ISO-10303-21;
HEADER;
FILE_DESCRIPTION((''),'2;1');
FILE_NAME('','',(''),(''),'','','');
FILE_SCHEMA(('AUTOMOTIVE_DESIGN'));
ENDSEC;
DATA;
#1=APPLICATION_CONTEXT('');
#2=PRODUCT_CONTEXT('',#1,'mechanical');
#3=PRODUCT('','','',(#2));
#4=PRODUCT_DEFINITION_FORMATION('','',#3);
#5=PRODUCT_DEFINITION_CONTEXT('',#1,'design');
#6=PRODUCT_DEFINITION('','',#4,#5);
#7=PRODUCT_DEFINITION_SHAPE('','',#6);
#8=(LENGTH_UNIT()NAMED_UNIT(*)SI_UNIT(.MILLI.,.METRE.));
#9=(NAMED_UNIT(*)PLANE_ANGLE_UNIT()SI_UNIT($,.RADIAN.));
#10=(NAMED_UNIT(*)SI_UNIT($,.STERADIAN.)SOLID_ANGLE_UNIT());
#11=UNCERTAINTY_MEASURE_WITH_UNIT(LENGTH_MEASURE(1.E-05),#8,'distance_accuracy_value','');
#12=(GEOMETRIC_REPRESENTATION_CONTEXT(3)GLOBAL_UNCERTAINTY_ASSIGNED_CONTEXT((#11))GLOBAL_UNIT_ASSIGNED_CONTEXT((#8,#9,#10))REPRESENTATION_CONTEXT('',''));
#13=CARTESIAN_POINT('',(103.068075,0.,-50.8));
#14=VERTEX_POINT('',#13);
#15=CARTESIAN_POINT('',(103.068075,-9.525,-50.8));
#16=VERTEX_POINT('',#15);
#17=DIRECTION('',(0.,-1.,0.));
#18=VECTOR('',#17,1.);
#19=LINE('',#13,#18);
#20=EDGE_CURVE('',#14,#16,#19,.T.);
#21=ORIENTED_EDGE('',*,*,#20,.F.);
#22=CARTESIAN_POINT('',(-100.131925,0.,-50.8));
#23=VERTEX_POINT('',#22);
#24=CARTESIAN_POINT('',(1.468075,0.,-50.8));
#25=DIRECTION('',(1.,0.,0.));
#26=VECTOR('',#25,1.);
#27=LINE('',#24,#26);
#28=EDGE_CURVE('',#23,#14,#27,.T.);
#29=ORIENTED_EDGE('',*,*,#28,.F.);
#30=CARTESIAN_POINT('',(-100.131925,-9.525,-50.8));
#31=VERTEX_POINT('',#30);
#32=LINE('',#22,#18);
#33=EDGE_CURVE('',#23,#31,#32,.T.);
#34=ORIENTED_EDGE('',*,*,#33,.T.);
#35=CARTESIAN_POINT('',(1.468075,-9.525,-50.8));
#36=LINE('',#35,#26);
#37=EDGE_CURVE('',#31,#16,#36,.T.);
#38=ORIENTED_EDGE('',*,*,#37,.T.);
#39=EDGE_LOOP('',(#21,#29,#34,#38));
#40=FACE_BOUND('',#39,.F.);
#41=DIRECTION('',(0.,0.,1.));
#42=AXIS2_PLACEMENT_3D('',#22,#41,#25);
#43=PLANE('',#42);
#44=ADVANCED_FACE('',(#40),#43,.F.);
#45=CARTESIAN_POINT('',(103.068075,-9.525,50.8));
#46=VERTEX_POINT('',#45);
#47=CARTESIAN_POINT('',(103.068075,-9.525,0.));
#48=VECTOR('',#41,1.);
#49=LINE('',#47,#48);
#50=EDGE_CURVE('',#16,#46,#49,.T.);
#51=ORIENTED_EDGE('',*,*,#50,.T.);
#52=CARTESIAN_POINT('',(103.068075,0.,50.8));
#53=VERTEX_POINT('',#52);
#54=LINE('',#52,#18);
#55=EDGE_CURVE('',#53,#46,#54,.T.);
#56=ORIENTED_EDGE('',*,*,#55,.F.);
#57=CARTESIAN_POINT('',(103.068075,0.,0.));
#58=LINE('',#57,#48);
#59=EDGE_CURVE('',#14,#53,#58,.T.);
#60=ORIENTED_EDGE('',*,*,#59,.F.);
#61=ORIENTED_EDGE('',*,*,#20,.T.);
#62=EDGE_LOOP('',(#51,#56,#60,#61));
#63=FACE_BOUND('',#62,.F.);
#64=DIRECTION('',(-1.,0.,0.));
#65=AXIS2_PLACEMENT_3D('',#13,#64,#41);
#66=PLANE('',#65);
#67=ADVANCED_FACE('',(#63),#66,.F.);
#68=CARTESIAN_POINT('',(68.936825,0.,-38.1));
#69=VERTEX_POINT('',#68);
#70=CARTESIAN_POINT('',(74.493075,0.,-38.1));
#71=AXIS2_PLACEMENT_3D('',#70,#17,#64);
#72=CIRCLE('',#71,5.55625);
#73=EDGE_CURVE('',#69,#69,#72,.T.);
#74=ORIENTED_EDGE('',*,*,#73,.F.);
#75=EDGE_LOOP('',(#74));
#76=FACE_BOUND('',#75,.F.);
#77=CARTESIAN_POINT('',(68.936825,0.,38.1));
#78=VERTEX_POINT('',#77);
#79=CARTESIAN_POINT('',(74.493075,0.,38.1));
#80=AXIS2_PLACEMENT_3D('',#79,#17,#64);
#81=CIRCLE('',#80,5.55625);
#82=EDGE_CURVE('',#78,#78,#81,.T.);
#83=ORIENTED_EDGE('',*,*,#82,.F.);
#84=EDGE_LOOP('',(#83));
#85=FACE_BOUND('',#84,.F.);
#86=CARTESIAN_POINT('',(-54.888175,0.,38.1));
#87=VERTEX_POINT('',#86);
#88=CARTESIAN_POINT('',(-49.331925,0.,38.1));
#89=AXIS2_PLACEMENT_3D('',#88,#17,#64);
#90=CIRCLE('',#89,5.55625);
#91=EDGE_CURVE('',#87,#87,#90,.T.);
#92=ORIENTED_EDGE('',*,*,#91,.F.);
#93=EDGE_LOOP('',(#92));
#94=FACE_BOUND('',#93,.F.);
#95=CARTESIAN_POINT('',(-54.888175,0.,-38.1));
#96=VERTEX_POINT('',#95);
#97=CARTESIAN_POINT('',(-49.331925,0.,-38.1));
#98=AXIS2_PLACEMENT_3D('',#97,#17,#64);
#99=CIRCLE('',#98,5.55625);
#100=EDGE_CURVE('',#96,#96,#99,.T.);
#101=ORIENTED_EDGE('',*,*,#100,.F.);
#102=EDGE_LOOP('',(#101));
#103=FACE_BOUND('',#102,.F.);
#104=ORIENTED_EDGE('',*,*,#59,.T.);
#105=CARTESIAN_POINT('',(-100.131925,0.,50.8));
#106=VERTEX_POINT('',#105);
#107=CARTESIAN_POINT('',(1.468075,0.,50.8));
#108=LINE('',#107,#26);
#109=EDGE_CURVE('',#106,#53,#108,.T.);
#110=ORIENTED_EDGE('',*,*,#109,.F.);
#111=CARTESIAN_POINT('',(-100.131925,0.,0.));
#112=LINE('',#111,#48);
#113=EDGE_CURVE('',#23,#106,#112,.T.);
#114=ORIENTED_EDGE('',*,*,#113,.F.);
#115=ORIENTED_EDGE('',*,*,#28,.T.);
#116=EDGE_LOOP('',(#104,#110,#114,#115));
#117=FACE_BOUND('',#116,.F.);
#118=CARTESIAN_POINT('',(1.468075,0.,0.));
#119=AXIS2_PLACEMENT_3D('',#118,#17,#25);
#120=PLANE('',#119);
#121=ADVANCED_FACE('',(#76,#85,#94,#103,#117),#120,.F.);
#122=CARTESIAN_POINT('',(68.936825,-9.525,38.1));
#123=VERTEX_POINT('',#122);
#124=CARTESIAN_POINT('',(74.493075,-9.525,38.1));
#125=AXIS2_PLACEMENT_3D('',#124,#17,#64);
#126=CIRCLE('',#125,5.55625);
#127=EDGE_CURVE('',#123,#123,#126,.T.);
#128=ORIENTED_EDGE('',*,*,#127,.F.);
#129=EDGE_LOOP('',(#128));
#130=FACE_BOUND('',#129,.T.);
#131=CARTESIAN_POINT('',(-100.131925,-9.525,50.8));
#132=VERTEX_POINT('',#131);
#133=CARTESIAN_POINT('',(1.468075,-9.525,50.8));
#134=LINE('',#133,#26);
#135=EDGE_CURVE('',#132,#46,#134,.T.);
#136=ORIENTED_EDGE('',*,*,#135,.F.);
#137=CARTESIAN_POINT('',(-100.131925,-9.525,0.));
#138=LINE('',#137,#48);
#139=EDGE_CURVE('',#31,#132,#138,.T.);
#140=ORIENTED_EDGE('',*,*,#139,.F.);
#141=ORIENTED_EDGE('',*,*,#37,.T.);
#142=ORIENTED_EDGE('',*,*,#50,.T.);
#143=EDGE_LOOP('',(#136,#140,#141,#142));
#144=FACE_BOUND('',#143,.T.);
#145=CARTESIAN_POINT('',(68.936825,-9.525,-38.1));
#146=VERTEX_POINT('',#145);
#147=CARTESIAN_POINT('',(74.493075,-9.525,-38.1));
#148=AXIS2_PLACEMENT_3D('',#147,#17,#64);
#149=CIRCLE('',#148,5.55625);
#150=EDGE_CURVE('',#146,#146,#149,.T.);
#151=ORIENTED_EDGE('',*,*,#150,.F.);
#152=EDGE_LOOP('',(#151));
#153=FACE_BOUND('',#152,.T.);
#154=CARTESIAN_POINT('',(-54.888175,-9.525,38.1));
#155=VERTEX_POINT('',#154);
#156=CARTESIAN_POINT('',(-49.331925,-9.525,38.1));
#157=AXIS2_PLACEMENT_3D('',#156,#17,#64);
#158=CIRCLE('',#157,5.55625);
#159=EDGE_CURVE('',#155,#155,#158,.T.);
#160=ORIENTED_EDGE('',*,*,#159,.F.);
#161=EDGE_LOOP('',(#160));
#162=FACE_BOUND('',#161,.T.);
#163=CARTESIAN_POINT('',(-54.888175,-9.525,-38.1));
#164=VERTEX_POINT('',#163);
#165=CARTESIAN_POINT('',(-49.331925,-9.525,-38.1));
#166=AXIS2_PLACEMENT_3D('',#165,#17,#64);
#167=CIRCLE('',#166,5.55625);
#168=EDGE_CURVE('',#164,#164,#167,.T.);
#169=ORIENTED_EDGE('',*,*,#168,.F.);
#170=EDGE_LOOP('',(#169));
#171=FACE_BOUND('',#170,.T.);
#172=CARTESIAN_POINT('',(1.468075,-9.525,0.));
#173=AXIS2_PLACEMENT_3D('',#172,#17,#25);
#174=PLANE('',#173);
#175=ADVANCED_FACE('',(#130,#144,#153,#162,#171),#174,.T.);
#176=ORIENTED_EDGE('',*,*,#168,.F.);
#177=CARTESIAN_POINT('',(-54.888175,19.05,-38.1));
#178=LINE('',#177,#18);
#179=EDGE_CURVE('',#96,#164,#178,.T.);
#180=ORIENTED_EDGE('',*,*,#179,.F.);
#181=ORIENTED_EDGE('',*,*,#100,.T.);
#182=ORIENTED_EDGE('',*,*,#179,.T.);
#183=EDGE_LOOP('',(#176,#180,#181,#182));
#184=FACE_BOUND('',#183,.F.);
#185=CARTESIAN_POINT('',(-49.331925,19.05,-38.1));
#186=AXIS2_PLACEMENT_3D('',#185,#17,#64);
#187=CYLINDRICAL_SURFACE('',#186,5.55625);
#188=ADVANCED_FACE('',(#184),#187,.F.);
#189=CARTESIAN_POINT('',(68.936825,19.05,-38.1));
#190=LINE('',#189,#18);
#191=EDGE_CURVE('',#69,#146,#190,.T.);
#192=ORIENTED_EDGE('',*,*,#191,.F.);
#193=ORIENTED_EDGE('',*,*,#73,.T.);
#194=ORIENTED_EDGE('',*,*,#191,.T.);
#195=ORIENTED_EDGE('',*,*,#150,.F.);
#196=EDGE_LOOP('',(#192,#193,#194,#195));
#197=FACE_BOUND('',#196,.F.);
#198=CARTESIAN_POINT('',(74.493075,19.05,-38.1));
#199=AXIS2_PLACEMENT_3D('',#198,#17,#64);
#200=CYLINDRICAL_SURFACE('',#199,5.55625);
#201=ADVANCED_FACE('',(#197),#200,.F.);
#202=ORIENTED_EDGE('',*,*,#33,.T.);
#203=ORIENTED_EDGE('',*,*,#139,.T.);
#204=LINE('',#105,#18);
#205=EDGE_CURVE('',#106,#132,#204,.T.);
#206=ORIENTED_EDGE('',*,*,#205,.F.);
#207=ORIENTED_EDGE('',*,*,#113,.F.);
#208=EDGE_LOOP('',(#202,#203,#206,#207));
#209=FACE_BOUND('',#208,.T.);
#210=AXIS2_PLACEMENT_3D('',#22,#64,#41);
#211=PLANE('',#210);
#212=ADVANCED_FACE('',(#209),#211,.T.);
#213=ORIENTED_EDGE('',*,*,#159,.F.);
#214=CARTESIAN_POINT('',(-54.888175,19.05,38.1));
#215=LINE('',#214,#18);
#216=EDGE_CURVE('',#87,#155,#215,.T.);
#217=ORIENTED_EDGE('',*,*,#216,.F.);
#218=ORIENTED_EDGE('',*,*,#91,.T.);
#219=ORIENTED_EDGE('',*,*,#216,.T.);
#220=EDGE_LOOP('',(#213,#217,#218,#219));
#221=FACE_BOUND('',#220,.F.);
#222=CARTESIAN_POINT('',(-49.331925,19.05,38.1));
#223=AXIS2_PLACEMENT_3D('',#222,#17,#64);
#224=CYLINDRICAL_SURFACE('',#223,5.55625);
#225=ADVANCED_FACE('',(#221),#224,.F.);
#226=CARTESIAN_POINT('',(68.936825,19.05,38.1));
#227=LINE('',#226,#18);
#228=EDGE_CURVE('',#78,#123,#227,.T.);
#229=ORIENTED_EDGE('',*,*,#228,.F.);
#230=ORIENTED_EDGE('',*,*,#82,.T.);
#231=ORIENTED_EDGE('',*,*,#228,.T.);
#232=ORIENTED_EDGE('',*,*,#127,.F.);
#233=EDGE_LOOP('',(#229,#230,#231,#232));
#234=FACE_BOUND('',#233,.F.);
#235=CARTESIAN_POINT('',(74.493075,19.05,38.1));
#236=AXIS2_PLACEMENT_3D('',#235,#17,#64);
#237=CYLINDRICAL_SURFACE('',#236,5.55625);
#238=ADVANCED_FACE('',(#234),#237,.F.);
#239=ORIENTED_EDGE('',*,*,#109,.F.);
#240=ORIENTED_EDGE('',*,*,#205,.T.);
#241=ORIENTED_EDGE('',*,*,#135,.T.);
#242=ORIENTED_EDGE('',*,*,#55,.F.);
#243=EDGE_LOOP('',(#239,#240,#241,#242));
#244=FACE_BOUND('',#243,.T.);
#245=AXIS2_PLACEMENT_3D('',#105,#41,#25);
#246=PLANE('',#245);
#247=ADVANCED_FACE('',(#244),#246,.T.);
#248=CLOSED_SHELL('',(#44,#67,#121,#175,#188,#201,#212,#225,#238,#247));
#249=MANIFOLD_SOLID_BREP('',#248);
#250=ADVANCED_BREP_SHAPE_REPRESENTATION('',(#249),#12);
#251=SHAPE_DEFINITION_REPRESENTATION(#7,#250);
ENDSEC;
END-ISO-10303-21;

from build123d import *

# Parameters (mm, degrees)
F0_W     = 203.2
F0_H     = 101.6
F1_DEPTH = 9.525
F2_D     = 11.1125
F2_DEPTH = 19.05
F2_TIP   = 3.3385318145


# Not quite as in the source:
# - a length typed as a fraction of an inch, garbled in the dataset ("3 / 203.2 mm" for 3/8 in), is restored


with BuildPart() as f1:
    # F0 (on Front) → F1 (new body)
    with BuildSketch(Plane.XZ):
        with Locations((1.4680749737, 0)):
            Rectangle(F0_W, F0_H)
    extrude(amount=F1_DEPTH)

    # F2
    with Locations(Plane(origin=(0, 0, 0), x_dir=(1, 0, 0), z_dir=(0, 1, 0))):
        with Locations((74.4930749737, -38.1), (-49.3319250263, 38.1), (-49.3319250263, -38.1), (74.4930749737, 38.1)):
            Hole(F2_D / 2, depth=F2_DEPTH)
            with Locations((0, 0, -(F2_DEPTH + F2_TIP / 2))):  # 118° drill point
                Cone(0, F2_D / 2, F2_TIP, mode=Mode.SUBTRACT)


solid = f1.part
